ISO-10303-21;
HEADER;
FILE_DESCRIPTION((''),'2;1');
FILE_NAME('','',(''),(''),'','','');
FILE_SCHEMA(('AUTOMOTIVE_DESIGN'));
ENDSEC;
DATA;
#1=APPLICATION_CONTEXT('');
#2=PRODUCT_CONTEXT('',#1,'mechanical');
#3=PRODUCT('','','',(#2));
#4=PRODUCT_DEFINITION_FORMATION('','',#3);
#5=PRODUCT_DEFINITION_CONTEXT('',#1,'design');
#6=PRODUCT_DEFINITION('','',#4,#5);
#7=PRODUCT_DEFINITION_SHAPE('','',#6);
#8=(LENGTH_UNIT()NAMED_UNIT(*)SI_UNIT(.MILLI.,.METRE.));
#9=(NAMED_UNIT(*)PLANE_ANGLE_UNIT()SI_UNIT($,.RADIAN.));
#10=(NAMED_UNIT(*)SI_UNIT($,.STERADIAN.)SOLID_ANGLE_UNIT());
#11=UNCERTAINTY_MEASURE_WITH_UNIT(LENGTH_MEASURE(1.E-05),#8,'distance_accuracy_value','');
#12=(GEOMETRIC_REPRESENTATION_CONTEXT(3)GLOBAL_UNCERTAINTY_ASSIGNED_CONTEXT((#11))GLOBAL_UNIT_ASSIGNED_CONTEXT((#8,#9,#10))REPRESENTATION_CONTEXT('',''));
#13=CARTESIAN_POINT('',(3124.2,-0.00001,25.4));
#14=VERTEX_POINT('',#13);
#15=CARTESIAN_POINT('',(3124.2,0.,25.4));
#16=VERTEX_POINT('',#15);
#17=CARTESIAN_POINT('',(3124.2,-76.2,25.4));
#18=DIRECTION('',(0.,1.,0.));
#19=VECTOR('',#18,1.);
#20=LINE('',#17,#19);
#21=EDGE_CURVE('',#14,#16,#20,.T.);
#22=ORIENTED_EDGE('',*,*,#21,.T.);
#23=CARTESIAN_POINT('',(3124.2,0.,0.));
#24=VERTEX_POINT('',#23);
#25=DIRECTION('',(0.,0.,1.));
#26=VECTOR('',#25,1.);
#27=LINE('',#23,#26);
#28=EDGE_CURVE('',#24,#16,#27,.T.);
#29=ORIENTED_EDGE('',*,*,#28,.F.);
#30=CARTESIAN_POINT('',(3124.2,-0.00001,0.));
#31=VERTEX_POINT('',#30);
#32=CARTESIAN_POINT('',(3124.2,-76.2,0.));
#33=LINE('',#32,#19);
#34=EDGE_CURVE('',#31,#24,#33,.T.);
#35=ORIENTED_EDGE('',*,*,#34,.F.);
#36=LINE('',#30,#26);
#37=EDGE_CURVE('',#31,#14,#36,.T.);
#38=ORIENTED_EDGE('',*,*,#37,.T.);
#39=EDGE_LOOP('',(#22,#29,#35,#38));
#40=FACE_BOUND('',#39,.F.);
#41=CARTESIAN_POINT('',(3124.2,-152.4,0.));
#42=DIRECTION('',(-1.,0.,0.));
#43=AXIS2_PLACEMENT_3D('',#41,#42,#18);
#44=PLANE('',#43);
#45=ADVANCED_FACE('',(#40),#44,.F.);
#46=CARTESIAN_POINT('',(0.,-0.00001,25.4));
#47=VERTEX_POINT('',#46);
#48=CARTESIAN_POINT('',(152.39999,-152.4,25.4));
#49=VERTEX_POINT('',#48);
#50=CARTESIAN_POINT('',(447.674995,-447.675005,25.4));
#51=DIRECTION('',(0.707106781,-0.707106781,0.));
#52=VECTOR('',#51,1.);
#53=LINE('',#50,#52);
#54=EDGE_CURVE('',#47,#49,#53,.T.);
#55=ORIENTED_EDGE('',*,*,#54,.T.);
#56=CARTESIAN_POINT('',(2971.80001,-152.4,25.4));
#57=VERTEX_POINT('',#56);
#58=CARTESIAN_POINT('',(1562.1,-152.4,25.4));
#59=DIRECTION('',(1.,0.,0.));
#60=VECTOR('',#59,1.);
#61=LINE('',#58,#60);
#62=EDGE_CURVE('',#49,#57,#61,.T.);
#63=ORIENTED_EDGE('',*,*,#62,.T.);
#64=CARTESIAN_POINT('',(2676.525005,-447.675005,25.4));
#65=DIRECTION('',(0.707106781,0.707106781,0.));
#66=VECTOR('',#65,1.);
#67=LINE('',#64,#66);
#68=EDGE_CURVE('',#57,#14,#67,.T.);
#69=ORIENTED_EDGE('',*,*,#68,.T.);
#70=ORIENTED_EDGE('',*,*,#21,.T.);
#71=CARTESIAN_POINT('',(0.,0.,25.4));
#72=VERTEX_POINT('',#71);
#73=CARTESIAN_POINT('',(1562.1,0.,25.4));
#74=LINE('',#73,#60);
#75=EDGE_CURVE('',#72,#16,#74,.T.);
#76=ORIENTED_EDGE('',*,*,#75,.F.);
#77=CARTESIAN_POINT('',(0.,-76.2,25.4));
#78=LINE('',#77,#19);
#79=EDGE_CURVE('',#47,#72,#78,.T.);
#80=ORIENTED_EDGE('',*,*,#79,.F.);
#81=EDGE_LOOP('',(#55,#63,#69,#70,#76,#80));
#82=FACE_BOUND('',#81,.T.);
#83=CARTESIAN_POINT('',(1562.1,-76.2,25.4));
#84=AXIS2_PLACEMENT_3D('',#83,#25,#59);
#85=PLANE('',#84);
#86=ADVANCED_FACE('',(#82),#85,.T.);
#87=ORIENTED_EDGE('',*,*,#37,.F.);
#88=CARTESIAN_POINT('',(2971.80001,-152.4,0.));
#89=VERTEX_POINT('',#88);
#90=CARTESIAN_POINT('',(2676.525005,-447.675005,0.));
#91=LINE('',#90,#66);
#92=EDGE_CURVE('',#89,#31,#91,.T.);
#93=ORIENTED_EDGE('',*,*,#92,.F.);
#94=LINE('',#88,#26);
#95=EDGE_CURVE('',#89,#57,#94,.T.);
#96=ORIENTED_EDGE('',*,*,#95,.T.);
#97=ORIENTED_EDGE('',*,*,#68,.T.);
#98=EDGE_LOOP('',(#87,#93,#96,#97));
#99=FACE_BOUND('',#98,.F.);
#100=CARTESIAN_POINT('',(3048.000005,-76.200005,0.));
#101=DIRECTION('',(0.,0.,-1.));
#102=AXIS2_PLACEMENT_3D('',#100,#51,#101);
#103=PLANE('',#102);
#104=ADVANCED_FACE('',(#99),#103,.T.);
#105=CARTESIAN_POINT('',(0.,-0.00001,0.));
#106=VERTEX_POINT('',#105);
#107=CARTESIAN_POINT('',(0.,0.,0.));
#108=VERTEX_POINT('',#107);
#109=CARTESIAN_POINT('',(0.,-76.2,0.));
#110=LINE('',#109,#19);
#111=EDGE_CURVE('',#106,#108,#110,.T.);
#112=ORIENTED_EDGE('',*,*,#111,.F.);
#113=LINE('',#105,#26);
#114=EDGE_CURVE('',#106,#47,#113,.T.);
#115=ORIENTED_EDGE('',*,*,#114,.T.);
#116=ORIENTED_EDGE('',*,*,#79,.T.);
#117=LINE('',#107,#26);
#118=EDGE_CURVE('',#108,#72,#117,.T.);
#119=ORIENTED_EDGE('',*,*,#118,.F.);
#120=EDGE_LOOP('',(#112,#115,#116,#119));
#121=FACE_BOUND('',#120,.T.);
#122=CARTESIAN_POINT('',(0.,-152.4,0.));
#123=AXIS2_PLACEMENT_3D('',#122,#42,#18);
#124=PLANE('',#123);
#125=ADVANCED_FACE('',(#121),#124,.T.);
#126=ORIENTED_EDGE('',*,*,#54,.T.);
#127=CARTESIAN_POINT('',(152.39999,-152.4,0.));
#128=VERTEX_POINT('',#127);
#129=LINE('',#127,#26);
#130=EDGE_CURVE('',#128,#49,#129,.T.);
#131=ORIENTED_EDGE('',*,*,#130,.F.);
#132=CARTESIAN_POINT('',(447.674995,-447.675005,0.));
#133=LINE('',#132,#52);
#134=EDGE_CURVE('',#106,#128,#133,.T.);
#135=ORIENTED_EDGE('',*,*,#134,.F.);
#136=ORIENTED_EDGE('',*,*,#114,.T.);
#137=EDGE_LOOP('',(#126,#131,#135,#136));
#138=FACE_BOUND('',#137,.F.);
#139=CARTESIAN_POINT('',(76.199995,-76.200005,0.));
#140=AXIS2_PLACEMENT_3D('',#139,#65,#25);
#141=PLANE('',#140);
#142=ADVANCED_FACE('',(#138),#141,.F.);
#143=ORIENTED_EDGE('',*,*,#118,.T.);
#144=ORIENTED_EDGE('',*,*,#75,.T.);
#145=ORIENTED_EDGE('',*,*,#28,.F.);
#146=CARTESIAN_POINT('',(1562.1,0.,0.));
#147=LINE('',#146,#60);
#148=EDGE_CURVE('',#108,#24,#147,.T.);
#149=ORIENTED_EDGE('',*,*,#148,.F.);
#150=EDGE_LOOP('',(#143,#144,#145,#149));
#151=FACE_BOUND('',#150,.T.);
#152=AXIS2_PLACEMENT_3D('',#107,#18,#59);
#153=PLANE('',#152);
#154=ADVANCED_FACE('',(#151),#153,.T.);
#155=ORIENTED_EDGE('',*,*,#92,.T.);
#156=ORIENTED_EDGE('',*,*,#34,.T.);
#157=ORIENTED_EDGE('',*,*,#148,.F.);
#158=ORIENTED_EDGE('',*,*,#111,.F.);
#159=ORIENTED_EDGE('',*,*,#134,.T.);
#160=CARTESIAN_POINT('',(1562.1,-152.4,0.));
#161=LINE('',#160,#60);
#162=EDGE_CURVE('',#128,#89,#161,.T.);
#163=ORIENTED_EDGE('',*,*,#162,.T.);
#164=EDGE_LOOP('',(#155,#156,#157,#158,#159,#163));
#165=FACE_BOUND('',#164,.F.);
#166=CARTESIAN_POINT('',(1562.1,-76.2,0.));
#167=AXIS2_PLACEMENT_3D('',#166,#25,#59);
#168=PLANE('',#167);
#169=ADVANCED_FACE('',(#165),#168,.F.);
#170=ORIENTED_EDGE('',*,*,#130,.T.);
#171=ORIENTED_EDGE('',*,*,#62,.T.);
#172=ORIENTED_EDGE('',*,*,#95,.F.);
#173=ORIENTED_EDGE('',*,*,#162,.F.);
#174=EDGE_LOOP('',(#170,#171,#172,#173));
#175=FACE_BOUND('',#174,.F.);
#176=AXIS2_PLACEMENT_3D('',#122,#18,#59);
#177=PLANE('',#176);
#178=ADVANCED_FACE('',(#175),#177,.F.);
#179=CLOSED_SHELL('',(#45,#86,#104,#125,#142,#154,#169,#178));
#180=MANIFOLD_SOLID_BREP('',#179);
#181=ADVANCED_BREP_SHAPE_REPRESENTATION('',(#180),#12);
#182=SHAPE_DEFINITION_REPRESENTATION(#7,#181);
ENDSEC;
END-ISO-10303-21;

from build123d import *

# Parameters (mm, degrees)
F0_W     = 3124.2
F0_H     = 152.4
F1_DEPTH = 25.4
F2_SIZE  = 152.39999


# Not quite as in the source:
# - a fillet or chamfer is up to 0.001 mm smaller than in the source, because OpenCascade refuses the exact size


with BuildPart() as f1:
    # F0 (on Top) → F1 (new body)
    with BuildSketch(Plane.XY):
        with Locations((1562.1, -76.2)):
            Rectangle(F0_W, F0_H)
    extrude(amount=F1_DEPTH)

    # F2 (size 152.4 in the source; OpenCascade refuses exactly that, so slightly less here)
    f2_edges = [f1.edges().sort_by_distance(p)[0] for p in [
        (0, -152.4, 12.7),
        (3124.2, -152.4, 12.7),
    ]]
    chamfer(f2_edges, length=F2_SIZE)


solid = f1.part
